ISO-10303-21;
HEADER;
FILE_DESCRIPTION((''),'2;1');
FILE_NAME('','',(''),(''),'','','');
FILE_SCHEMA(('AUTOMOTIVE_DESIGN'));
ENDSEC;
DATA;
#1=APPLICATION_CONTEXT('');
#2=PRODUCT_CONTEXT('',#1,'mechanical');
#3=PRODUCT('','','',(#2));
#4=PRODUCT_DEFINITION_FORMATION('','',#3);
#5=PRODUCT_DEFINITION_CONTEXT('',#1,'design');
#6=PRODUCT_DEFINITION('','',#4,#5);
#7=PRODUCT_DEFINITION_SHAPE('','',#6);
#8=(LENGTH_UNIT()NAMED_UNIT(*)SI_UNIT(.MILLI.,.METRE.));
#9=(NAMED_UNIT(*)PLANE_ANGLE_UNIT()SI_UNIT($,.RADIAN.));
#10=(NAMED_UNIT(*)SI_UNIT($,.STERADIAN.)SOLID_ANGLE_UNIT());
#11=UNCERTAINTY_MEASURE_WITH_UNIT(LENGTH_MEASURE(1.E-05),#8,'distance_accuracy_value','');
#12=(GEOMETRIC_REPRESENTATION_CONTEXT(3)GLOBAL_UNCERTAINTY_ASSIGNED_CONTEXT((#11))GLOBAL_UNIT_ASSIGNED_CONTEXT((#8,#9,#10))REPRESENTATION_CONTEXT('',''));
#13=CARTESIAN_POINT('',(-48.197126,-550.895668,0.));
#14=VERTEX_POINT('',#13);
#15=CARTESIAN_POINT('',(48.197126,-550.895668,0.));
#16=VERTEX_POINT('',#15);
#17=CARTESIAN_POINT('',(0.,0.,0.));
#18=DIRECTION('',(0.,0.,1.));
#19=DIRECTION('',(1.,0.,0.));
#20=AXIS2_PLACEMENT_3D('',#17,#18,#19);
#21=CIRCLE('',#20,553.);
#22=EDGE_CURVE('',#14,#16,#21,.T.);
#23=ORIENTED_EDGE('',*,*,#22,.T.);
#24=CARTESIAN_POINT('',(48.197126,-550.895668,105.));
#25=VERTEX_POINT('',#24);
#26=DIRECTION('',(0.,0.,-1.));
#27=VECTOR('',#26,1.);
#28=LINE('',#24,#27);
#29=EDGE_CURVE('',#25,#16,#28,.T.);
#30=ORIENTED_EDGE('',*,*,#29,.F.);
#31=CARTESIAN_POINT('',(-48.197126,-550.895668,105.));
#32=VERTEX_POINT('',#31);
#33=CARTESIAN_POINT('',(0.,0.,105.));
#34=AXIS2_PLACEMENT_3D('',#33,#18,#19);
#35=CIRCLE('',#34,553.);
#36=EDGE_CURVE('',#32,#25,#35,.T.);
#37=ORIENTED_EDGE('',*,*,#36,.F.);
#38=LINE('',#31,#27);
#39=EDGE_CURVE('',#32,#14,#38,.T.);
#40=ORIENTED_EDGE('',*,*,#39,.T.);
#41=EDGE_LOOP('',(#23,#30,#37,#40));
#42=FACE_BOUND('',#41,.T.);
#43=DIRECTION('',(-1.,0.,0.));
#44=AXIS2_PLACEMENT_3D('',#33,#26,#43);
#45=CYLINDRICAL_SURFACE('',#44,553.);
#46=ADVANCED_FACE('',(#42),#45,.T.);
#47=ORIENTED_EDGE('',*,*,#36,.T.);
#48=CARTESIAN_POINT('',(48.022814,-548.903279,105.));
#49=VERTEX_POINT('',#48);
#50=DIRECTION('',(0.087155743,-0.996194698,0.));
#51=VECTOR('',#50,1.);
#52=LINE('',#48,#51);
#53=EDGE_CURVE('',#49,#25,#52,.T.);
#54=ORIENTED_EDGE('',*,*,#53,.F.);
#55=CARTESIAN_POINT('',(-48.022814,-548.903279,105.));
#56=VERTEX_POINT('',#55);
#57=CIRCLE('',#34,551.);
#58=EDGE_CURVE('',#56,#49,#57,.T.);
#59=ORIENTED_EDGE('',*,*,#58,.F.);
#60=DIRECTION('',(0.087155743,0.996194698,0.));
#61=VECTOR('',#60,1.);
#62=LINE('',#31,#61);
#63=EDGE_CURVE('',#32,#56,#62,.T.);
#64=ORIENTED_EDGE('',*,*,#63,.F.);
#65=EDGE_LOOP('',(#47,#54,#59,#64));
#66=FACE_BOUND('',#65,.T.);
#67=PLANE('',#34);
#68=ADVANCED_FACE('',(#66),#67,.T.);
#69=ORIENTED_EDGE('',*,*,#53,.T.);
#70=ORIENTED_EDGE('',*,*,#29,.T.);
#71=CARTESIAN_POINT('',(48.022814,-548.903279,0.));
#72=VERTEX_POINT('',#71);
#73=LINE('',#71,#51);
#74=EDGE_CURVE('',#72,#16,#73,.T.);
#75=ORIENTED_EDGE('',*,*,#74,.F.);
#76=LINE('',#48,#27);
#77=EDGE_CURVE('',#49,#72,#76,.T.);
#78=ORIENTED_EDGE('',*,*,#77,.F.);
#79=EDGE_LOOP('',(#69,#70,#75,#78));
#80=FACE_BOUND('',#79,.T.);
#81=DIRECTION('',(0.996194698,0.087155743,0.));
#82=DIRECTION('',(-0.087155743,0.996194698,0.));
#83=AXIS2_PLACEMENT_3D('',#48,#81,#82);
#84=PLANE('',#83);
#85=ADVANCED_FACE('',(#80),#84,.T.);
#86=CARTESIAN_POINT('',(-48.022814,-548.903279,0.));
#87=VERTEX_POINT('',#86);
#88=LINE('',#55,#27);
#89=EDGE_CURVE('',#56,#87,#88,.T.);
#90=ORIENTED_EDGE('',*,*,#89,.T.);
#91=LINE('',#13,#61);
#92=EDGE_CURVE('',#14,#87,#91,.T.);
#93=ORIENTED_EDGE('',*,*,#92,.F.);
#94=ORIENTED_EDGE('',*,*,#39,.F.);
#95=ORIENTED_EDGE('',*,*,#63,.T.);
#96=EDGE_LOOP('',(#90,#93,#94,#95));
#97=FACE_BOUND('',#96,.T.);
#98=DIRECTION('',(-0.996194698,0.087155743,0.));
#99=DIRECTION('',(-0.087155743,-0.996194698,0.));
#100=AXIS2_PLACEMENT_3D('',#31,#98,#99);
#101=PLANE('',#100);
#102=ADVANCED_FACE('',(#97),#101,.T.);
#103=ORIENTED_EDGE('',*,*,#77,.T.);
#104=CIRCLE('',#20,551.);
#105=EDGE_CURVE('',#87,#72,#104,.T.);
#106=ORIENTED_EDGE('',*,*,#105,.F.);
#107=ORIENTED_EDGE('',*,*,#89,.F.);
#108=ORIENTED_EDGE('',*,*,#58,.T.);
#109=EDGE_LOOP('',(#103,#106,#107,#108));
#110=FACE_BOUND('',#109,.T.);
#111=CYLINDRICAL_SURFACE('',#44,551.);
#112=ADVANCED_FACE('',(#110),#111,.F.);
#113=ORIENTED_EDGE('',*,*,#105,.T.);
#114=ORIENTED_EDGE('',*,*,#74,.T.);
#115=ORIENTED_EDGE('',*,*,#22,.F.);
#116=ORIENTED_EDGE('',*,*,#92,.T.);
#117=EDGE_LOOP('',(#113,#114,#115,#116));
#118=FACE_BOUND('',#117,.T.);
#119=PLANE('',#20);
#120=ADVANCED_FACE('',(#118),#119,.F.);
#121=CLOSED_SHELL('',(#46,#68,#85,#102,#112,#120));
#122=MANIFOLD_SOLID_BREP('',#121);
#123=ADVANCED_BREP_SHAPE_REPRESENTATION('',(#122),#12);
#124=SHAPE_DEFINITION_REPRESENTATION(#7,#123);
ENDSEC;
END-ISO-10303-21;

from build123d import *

# Parameters (mm, degrees)
SM_BASE_FLANGE_1_DEPTH = 105


# Sheet-metal steps are written as plain solids
with BuildPart() as part:
    # Sketch 1 → 基体-法兰1 (new body)
    with BuildSketch(Plane.XY):
        with BuildLine():
            ThreePointArc((-48.197125739, -550.895668045), (0, -553), (48.197125739, -550.895668045))
            Line((48.197125739, -550.895668045), (48.022814254, -548.903278649))
            ThreePointArc((48.022814254, -548.903278649), (0, -551), (-48.022814254, -548.903278649))
            Line((-48.022814254, -548.903278649), (-48.197125739, -550.895668045))
        make_face()
    extrude(amount=SM_BASE_FLANGE_1_DEPTH)


solid = part.part
